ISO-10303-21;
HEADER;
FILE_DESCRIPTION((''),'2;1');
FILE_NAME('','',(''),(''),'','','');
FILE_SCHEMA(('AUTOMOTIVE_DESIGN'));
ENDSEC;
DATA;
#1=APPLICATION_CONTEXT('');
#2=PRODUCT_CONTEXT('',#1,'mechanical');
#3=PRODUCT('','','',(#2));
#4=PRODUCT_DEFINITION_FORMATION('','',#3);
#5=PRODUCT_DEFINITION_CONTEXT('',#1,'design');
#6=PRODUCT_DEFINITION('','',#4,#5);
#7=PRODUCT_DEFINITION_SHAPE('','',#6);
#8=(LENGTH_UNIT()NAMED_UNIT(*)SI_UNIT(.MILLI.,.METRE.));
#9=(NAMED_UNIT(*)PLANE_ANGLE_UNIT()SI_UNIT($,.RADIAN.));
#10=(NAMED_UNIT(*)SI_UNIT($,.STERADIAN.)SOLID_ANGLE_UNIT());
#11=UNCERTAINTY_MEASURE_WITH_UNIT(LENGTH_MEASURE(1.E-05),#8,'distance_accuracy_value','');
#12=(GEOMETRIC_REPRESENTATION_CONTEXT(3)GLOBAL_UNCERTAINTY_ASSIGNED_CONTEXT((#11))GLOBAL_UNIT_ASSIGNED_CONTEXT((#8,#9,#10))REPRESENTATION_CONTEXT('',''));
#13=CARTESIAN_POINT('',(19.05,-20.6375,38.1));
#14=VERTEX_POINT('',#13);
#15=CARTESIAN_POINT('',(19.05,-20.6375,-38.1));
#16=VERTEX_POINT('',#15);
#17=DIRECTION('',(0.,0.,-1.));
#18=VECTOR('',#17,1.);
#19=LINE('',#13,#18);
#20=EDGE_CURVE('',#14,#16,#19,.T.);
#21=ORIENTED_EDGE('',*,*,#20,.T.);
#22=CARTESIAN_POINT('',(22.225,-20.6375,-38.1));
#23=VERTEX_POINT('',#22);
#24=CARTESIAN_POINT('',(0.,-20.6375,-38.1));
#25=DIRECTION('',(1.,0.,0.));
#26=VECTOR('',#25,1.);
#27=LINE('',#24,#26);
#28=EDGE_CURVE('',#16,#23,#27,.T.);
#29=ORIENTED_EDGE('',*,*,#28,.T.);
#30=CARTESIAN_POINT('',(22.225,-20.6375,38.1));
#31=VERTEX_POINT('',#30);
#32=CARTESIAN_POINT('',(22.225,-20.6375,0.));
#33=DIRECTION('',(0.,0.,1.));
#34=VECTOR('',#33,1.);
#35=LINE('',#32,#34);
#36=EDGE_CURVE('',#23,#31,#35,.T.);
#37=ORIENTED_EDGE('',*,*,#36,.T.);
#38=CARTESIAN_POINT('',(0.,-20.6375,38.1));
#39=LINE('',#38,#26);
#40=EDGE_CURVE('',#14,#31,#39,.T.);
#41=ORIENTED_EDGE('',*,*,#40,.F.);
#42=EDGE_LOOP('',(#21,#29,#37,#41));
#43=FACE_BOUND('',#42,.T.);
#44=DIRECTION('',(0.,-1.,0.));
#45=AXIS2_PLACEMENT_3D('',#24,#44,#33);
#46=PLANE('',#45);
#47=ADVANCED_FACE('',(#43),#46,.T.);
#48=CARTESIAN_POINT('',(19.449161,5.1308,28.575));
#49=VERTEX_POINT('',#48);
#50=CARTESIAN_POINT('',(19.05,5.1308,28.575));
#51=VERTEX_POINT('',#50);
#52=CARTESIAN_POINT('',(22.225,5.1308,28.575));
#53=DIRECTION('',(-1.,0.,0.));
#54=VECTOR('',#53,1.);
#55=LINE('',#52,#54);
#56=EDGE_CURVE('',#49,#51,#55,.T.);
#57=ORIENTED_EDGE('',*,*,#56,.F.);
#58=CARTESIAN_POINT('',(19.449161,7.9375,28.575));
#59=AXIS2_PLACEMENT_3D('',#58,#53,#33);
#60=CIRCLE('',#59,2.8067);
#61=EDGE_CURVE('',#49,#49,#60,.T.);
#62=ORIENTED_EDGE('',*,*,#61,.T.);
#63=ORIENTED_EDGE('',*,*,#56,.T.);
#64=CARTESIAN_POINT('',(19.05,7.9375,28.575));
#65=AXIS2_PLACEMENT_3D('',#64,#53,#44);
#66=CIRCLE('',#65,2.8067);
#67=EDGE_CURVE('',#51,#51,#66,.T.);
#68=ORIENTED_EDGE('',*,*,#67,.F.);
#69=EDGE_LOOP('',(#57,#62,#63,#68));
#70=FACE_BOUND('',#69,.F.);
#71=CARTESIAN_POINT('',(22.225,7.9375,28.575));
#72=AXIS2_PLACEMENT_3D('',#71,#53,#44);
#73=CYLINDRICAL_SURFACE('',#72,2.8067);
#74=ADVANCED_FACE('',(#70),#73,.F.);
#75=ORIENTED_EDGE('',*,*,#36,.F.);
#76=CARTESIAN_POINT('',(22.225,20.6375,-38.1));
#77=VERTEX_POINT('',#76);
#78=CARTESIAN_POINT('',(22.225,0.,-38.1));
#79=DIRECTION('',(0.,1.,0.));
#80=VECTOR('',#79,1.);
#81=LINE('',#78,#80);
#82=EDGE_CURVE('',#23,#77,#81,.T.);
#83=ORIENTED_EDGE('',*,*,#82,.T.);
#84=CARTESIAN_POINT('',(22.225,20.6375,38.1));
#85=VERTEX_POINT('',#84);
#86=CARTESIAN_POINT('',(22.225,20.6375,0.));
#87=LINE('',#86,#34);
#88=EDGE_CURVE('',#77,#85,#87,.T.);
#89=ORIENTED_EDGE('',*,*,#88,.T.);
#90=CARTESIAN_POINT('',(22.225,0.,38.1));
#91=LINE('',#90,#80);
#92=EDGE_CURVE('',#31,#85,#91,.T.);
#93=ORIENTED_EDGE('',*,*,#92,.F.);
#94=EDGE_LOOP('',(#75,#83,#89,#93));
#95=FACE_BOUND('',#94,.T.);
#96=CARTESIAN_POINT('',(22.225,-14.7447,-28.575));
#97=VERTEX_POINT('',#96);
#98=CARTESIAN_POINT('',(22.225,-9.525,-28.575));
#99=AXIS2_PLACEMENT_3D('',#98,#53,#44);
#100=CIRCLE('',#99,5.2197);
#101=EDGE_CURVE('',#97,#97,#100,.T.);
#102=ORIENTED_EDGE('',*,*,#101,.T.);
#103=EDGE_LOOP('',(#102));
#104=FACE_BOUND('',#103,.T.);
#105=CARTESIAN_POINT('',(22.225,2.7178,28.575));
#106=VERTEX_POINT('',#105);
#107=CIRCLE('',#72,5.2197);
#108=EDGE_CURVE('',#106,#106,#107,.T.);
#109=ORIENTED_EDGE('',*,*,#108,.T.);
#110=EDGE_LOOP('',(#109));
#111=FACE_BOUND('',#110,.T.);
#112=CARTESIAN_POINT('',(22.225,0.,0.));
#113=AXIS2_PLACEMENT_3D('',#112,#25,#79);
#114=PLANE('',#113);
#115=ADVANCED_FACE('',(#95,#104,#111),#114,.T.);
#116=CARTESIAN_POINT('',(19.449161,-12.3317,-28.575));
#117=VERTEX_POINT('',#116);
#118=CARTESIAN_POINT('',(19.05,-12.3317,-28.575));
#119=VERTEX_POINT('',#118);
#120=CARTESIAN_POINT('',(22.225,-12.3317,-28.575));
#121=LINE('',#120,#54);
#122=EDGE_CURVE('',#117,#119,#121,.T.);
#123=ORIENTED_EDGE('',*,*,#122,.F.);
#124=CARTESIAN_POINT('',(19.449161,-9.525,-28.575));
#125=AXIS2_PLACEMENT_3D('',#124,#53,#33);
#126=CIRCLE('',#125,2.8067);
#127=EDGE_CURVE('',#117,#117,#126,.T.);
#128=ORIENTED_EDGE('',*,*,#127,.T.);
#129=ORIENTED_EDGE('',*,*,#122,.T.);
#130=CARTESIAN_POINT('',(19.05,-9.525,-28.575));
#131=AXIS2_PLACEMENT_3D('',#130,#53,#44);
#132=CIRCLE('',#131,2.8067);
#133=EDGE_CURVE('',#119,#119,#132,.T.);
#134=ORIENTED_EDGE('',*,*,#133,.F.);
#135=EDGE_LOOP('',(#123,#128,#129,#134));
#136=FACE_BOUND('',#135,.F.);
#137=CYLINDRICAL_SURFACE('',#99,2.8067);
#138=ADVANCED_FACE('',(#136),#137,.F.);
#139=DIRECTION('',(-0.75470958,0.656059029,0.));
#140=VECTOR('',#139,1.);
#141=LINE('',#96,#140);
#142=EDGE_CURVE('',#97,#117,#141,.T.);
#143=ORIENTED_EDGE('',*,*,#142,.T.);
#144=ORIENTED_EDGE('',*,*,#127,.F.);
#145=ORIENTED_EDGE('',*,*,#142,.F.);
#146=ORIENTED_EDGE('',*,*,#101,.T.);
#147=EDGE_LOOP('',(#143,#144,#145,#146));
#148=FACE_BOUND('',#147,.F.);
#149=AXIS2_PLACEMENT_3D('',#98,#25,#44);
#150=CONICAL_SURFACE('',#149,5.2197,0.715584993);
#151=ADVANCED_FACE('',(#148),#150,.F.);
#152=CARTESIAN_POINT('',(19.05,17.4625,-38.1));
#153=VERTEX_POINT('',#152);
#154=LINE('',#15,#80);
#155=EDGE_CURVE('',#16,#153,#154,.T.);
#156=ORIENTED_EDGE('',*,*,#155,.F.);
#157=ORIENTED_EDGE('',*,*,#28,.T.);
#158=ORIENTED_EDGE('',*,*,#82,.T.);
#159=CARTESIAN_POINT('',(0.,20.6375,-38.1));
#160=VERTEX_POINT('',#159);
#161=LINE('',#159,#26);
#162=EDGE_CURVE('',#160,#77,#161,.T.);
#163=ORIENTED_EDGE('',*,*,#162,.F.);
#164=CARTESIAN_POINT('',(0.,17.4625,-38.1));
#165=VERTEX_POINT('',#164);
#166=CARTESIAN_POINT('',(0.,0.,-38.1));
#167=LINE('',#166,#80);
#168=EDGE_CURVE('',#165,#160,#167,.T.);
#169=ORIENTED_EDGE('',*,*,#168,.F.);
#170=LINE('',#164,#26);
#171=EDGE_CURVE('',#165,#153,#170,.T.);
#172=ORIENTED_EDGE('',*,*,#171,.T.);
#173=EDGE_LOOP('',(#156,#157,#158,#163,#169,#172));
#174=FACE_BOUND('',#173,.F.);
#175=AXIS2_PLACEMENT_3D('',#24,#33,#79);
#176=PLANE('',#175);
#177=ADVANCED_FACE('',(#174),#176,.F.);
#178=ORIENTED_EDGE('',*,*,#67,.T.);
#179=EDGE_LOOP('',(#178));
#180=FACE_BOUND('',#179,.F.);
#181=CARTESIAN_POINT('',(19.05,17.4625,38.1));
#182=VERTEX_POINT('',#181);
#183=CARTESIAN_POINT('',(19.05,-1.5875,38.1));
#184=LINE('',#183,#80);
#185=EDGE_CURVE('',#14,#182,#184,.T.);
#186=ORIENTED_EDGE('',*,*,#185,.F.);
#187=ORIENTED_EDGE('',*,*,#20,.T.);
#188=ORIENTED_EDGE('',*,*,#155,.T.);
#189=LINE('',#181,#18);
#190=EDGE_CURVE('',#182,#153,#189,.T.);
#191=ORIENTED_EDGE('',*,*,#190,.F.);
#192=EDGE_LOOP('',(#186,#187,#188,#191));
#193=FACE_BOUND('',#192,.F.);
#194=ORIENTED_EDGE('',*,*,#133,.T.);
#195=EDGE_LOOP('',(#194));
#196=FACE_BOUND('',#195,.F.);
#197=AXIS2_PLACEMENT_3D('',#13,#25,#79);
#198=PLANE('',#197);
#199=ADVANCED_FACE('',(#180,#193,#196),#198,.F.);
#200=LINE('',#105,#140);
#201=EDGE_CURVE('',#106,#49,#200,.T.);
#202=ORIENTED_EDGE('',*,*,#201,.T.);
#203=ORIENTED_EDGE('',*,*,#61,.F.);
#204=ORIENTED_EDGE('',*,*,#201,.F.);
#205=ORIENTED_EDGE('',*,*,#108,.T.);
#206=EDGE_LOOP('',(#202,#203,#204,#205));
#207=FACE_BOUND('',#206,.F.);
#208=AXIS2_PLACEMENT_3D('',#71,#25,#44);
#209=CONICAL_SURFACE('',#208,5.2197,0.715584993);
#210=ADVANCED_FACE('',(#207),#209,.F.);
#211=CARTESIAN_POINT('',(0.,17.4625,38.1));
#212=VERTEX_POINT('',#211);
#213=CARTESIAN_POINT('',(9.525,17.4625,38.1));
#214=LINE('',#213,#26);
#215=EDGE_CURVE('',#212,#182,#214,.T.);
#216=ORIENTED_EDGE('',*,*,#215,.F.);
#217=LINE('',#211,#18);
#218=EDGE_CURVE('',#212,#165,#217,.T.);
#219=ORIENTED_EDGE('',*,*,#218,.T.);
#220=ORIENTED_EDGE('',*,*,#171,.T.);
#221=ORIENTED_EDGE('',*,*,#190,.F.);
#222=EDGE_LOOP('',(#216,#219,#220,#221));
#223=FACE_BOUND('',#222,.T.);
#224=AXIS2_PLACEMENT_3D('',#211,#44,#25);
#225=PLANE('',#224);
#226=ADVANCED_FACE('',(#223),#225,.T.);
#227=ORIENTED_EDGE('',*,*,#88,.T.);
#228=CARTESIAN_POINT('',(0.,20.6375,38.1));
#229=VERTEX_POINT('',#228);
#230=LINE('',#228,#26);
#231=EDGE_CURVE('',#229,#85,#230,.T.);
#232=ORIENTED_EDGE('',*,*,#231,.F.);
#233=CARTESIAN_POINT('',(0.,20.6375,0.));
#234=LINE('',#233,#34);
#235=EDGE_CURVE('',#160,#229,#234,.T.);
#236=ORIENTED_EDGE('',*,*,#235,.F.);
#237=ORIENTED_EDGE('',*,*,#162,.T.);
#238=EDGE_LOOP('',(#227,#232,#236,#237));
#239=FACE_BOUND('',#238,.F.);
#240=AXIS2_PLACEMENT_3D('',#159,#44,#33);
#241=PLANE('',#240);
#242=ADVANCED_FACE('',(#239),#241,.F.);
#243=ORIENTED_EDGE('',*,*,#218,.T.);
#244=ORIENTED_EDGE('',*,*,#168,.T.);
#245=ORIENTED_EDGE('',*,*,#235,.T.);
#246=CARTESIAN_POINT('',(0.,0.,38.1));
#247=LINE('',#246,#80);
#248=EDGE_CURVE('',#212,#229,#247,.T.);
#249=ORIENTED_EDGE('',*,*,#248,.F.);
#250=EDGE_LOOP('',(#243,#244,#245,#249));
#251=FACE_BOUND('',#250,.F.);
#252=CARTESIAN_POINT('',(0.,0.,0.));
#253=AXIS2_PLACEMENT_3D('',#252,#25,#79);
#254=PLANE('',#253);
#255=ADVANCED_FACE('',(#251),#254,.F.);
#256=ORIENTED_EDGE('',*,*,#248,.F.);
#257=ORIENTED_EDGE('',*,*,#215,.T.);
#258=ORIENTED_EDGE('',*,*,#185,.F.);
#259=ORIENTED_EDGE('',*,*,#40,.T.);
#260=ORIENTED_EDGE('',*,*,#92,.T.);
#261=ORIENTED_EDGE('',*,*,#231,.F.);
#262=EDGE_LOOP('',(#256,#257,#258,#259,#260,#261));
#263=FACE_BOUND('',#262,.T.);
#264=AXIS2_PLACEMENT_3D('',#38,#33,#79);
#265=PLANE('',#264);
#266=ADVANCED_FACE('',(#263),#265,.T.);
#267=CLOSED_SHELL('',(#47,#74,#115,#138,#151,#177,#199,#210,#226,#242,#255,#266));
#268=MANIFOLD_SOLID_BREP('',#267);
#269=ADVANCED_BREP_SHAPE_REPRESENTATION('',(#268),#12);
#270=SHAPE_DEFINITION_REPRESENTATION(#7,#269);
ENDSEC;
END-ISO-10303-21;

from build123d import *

# Parameters (mm, degrees)
F0_W           = 41.275
F0_H           = 76.2
F1_DEPTH       = 22.225
F3_D           = 5.6134
F3_CSINK_D     = 10.4394
F3_CSINK_ANGLE = 82
F4_W           = 19.05
F4_H           = 38.1
F5_DEPTH       = 76.201


# Not quite as in the source:
# - a feature names something its author has since deleted; it is built from what else it names


with BuildPart() as f1:
    # F0 (on Right) → F1 (new body)
    with BuildSketch(Plane.YZ):
        Rectangle(F0_W, F0_H)
    extrude(amount=F1_DEPTH)

    # F3 (through all)
    with Locations(Plane.YZ.offset(22.225)):
        with Locations((7.9375, 28.575), (-9.525, -28.575)):
            CounterSinkHole(F3_D / 2, F3_CSINK_D / 2, counter_sink_angle=F3_CSINK_ANGLE)

    # F4 (on face) → F5 (cut, through all)
    with BuildSketch(Plane.XY.offset(38.1)):
        with Locations((9.525, -1.5875)):
            Rectangle(F4_W, F4_H)
    extrude(amount=-F5_DEPTH, mode=Mode.SUBTRACT)


solid = f1.part
